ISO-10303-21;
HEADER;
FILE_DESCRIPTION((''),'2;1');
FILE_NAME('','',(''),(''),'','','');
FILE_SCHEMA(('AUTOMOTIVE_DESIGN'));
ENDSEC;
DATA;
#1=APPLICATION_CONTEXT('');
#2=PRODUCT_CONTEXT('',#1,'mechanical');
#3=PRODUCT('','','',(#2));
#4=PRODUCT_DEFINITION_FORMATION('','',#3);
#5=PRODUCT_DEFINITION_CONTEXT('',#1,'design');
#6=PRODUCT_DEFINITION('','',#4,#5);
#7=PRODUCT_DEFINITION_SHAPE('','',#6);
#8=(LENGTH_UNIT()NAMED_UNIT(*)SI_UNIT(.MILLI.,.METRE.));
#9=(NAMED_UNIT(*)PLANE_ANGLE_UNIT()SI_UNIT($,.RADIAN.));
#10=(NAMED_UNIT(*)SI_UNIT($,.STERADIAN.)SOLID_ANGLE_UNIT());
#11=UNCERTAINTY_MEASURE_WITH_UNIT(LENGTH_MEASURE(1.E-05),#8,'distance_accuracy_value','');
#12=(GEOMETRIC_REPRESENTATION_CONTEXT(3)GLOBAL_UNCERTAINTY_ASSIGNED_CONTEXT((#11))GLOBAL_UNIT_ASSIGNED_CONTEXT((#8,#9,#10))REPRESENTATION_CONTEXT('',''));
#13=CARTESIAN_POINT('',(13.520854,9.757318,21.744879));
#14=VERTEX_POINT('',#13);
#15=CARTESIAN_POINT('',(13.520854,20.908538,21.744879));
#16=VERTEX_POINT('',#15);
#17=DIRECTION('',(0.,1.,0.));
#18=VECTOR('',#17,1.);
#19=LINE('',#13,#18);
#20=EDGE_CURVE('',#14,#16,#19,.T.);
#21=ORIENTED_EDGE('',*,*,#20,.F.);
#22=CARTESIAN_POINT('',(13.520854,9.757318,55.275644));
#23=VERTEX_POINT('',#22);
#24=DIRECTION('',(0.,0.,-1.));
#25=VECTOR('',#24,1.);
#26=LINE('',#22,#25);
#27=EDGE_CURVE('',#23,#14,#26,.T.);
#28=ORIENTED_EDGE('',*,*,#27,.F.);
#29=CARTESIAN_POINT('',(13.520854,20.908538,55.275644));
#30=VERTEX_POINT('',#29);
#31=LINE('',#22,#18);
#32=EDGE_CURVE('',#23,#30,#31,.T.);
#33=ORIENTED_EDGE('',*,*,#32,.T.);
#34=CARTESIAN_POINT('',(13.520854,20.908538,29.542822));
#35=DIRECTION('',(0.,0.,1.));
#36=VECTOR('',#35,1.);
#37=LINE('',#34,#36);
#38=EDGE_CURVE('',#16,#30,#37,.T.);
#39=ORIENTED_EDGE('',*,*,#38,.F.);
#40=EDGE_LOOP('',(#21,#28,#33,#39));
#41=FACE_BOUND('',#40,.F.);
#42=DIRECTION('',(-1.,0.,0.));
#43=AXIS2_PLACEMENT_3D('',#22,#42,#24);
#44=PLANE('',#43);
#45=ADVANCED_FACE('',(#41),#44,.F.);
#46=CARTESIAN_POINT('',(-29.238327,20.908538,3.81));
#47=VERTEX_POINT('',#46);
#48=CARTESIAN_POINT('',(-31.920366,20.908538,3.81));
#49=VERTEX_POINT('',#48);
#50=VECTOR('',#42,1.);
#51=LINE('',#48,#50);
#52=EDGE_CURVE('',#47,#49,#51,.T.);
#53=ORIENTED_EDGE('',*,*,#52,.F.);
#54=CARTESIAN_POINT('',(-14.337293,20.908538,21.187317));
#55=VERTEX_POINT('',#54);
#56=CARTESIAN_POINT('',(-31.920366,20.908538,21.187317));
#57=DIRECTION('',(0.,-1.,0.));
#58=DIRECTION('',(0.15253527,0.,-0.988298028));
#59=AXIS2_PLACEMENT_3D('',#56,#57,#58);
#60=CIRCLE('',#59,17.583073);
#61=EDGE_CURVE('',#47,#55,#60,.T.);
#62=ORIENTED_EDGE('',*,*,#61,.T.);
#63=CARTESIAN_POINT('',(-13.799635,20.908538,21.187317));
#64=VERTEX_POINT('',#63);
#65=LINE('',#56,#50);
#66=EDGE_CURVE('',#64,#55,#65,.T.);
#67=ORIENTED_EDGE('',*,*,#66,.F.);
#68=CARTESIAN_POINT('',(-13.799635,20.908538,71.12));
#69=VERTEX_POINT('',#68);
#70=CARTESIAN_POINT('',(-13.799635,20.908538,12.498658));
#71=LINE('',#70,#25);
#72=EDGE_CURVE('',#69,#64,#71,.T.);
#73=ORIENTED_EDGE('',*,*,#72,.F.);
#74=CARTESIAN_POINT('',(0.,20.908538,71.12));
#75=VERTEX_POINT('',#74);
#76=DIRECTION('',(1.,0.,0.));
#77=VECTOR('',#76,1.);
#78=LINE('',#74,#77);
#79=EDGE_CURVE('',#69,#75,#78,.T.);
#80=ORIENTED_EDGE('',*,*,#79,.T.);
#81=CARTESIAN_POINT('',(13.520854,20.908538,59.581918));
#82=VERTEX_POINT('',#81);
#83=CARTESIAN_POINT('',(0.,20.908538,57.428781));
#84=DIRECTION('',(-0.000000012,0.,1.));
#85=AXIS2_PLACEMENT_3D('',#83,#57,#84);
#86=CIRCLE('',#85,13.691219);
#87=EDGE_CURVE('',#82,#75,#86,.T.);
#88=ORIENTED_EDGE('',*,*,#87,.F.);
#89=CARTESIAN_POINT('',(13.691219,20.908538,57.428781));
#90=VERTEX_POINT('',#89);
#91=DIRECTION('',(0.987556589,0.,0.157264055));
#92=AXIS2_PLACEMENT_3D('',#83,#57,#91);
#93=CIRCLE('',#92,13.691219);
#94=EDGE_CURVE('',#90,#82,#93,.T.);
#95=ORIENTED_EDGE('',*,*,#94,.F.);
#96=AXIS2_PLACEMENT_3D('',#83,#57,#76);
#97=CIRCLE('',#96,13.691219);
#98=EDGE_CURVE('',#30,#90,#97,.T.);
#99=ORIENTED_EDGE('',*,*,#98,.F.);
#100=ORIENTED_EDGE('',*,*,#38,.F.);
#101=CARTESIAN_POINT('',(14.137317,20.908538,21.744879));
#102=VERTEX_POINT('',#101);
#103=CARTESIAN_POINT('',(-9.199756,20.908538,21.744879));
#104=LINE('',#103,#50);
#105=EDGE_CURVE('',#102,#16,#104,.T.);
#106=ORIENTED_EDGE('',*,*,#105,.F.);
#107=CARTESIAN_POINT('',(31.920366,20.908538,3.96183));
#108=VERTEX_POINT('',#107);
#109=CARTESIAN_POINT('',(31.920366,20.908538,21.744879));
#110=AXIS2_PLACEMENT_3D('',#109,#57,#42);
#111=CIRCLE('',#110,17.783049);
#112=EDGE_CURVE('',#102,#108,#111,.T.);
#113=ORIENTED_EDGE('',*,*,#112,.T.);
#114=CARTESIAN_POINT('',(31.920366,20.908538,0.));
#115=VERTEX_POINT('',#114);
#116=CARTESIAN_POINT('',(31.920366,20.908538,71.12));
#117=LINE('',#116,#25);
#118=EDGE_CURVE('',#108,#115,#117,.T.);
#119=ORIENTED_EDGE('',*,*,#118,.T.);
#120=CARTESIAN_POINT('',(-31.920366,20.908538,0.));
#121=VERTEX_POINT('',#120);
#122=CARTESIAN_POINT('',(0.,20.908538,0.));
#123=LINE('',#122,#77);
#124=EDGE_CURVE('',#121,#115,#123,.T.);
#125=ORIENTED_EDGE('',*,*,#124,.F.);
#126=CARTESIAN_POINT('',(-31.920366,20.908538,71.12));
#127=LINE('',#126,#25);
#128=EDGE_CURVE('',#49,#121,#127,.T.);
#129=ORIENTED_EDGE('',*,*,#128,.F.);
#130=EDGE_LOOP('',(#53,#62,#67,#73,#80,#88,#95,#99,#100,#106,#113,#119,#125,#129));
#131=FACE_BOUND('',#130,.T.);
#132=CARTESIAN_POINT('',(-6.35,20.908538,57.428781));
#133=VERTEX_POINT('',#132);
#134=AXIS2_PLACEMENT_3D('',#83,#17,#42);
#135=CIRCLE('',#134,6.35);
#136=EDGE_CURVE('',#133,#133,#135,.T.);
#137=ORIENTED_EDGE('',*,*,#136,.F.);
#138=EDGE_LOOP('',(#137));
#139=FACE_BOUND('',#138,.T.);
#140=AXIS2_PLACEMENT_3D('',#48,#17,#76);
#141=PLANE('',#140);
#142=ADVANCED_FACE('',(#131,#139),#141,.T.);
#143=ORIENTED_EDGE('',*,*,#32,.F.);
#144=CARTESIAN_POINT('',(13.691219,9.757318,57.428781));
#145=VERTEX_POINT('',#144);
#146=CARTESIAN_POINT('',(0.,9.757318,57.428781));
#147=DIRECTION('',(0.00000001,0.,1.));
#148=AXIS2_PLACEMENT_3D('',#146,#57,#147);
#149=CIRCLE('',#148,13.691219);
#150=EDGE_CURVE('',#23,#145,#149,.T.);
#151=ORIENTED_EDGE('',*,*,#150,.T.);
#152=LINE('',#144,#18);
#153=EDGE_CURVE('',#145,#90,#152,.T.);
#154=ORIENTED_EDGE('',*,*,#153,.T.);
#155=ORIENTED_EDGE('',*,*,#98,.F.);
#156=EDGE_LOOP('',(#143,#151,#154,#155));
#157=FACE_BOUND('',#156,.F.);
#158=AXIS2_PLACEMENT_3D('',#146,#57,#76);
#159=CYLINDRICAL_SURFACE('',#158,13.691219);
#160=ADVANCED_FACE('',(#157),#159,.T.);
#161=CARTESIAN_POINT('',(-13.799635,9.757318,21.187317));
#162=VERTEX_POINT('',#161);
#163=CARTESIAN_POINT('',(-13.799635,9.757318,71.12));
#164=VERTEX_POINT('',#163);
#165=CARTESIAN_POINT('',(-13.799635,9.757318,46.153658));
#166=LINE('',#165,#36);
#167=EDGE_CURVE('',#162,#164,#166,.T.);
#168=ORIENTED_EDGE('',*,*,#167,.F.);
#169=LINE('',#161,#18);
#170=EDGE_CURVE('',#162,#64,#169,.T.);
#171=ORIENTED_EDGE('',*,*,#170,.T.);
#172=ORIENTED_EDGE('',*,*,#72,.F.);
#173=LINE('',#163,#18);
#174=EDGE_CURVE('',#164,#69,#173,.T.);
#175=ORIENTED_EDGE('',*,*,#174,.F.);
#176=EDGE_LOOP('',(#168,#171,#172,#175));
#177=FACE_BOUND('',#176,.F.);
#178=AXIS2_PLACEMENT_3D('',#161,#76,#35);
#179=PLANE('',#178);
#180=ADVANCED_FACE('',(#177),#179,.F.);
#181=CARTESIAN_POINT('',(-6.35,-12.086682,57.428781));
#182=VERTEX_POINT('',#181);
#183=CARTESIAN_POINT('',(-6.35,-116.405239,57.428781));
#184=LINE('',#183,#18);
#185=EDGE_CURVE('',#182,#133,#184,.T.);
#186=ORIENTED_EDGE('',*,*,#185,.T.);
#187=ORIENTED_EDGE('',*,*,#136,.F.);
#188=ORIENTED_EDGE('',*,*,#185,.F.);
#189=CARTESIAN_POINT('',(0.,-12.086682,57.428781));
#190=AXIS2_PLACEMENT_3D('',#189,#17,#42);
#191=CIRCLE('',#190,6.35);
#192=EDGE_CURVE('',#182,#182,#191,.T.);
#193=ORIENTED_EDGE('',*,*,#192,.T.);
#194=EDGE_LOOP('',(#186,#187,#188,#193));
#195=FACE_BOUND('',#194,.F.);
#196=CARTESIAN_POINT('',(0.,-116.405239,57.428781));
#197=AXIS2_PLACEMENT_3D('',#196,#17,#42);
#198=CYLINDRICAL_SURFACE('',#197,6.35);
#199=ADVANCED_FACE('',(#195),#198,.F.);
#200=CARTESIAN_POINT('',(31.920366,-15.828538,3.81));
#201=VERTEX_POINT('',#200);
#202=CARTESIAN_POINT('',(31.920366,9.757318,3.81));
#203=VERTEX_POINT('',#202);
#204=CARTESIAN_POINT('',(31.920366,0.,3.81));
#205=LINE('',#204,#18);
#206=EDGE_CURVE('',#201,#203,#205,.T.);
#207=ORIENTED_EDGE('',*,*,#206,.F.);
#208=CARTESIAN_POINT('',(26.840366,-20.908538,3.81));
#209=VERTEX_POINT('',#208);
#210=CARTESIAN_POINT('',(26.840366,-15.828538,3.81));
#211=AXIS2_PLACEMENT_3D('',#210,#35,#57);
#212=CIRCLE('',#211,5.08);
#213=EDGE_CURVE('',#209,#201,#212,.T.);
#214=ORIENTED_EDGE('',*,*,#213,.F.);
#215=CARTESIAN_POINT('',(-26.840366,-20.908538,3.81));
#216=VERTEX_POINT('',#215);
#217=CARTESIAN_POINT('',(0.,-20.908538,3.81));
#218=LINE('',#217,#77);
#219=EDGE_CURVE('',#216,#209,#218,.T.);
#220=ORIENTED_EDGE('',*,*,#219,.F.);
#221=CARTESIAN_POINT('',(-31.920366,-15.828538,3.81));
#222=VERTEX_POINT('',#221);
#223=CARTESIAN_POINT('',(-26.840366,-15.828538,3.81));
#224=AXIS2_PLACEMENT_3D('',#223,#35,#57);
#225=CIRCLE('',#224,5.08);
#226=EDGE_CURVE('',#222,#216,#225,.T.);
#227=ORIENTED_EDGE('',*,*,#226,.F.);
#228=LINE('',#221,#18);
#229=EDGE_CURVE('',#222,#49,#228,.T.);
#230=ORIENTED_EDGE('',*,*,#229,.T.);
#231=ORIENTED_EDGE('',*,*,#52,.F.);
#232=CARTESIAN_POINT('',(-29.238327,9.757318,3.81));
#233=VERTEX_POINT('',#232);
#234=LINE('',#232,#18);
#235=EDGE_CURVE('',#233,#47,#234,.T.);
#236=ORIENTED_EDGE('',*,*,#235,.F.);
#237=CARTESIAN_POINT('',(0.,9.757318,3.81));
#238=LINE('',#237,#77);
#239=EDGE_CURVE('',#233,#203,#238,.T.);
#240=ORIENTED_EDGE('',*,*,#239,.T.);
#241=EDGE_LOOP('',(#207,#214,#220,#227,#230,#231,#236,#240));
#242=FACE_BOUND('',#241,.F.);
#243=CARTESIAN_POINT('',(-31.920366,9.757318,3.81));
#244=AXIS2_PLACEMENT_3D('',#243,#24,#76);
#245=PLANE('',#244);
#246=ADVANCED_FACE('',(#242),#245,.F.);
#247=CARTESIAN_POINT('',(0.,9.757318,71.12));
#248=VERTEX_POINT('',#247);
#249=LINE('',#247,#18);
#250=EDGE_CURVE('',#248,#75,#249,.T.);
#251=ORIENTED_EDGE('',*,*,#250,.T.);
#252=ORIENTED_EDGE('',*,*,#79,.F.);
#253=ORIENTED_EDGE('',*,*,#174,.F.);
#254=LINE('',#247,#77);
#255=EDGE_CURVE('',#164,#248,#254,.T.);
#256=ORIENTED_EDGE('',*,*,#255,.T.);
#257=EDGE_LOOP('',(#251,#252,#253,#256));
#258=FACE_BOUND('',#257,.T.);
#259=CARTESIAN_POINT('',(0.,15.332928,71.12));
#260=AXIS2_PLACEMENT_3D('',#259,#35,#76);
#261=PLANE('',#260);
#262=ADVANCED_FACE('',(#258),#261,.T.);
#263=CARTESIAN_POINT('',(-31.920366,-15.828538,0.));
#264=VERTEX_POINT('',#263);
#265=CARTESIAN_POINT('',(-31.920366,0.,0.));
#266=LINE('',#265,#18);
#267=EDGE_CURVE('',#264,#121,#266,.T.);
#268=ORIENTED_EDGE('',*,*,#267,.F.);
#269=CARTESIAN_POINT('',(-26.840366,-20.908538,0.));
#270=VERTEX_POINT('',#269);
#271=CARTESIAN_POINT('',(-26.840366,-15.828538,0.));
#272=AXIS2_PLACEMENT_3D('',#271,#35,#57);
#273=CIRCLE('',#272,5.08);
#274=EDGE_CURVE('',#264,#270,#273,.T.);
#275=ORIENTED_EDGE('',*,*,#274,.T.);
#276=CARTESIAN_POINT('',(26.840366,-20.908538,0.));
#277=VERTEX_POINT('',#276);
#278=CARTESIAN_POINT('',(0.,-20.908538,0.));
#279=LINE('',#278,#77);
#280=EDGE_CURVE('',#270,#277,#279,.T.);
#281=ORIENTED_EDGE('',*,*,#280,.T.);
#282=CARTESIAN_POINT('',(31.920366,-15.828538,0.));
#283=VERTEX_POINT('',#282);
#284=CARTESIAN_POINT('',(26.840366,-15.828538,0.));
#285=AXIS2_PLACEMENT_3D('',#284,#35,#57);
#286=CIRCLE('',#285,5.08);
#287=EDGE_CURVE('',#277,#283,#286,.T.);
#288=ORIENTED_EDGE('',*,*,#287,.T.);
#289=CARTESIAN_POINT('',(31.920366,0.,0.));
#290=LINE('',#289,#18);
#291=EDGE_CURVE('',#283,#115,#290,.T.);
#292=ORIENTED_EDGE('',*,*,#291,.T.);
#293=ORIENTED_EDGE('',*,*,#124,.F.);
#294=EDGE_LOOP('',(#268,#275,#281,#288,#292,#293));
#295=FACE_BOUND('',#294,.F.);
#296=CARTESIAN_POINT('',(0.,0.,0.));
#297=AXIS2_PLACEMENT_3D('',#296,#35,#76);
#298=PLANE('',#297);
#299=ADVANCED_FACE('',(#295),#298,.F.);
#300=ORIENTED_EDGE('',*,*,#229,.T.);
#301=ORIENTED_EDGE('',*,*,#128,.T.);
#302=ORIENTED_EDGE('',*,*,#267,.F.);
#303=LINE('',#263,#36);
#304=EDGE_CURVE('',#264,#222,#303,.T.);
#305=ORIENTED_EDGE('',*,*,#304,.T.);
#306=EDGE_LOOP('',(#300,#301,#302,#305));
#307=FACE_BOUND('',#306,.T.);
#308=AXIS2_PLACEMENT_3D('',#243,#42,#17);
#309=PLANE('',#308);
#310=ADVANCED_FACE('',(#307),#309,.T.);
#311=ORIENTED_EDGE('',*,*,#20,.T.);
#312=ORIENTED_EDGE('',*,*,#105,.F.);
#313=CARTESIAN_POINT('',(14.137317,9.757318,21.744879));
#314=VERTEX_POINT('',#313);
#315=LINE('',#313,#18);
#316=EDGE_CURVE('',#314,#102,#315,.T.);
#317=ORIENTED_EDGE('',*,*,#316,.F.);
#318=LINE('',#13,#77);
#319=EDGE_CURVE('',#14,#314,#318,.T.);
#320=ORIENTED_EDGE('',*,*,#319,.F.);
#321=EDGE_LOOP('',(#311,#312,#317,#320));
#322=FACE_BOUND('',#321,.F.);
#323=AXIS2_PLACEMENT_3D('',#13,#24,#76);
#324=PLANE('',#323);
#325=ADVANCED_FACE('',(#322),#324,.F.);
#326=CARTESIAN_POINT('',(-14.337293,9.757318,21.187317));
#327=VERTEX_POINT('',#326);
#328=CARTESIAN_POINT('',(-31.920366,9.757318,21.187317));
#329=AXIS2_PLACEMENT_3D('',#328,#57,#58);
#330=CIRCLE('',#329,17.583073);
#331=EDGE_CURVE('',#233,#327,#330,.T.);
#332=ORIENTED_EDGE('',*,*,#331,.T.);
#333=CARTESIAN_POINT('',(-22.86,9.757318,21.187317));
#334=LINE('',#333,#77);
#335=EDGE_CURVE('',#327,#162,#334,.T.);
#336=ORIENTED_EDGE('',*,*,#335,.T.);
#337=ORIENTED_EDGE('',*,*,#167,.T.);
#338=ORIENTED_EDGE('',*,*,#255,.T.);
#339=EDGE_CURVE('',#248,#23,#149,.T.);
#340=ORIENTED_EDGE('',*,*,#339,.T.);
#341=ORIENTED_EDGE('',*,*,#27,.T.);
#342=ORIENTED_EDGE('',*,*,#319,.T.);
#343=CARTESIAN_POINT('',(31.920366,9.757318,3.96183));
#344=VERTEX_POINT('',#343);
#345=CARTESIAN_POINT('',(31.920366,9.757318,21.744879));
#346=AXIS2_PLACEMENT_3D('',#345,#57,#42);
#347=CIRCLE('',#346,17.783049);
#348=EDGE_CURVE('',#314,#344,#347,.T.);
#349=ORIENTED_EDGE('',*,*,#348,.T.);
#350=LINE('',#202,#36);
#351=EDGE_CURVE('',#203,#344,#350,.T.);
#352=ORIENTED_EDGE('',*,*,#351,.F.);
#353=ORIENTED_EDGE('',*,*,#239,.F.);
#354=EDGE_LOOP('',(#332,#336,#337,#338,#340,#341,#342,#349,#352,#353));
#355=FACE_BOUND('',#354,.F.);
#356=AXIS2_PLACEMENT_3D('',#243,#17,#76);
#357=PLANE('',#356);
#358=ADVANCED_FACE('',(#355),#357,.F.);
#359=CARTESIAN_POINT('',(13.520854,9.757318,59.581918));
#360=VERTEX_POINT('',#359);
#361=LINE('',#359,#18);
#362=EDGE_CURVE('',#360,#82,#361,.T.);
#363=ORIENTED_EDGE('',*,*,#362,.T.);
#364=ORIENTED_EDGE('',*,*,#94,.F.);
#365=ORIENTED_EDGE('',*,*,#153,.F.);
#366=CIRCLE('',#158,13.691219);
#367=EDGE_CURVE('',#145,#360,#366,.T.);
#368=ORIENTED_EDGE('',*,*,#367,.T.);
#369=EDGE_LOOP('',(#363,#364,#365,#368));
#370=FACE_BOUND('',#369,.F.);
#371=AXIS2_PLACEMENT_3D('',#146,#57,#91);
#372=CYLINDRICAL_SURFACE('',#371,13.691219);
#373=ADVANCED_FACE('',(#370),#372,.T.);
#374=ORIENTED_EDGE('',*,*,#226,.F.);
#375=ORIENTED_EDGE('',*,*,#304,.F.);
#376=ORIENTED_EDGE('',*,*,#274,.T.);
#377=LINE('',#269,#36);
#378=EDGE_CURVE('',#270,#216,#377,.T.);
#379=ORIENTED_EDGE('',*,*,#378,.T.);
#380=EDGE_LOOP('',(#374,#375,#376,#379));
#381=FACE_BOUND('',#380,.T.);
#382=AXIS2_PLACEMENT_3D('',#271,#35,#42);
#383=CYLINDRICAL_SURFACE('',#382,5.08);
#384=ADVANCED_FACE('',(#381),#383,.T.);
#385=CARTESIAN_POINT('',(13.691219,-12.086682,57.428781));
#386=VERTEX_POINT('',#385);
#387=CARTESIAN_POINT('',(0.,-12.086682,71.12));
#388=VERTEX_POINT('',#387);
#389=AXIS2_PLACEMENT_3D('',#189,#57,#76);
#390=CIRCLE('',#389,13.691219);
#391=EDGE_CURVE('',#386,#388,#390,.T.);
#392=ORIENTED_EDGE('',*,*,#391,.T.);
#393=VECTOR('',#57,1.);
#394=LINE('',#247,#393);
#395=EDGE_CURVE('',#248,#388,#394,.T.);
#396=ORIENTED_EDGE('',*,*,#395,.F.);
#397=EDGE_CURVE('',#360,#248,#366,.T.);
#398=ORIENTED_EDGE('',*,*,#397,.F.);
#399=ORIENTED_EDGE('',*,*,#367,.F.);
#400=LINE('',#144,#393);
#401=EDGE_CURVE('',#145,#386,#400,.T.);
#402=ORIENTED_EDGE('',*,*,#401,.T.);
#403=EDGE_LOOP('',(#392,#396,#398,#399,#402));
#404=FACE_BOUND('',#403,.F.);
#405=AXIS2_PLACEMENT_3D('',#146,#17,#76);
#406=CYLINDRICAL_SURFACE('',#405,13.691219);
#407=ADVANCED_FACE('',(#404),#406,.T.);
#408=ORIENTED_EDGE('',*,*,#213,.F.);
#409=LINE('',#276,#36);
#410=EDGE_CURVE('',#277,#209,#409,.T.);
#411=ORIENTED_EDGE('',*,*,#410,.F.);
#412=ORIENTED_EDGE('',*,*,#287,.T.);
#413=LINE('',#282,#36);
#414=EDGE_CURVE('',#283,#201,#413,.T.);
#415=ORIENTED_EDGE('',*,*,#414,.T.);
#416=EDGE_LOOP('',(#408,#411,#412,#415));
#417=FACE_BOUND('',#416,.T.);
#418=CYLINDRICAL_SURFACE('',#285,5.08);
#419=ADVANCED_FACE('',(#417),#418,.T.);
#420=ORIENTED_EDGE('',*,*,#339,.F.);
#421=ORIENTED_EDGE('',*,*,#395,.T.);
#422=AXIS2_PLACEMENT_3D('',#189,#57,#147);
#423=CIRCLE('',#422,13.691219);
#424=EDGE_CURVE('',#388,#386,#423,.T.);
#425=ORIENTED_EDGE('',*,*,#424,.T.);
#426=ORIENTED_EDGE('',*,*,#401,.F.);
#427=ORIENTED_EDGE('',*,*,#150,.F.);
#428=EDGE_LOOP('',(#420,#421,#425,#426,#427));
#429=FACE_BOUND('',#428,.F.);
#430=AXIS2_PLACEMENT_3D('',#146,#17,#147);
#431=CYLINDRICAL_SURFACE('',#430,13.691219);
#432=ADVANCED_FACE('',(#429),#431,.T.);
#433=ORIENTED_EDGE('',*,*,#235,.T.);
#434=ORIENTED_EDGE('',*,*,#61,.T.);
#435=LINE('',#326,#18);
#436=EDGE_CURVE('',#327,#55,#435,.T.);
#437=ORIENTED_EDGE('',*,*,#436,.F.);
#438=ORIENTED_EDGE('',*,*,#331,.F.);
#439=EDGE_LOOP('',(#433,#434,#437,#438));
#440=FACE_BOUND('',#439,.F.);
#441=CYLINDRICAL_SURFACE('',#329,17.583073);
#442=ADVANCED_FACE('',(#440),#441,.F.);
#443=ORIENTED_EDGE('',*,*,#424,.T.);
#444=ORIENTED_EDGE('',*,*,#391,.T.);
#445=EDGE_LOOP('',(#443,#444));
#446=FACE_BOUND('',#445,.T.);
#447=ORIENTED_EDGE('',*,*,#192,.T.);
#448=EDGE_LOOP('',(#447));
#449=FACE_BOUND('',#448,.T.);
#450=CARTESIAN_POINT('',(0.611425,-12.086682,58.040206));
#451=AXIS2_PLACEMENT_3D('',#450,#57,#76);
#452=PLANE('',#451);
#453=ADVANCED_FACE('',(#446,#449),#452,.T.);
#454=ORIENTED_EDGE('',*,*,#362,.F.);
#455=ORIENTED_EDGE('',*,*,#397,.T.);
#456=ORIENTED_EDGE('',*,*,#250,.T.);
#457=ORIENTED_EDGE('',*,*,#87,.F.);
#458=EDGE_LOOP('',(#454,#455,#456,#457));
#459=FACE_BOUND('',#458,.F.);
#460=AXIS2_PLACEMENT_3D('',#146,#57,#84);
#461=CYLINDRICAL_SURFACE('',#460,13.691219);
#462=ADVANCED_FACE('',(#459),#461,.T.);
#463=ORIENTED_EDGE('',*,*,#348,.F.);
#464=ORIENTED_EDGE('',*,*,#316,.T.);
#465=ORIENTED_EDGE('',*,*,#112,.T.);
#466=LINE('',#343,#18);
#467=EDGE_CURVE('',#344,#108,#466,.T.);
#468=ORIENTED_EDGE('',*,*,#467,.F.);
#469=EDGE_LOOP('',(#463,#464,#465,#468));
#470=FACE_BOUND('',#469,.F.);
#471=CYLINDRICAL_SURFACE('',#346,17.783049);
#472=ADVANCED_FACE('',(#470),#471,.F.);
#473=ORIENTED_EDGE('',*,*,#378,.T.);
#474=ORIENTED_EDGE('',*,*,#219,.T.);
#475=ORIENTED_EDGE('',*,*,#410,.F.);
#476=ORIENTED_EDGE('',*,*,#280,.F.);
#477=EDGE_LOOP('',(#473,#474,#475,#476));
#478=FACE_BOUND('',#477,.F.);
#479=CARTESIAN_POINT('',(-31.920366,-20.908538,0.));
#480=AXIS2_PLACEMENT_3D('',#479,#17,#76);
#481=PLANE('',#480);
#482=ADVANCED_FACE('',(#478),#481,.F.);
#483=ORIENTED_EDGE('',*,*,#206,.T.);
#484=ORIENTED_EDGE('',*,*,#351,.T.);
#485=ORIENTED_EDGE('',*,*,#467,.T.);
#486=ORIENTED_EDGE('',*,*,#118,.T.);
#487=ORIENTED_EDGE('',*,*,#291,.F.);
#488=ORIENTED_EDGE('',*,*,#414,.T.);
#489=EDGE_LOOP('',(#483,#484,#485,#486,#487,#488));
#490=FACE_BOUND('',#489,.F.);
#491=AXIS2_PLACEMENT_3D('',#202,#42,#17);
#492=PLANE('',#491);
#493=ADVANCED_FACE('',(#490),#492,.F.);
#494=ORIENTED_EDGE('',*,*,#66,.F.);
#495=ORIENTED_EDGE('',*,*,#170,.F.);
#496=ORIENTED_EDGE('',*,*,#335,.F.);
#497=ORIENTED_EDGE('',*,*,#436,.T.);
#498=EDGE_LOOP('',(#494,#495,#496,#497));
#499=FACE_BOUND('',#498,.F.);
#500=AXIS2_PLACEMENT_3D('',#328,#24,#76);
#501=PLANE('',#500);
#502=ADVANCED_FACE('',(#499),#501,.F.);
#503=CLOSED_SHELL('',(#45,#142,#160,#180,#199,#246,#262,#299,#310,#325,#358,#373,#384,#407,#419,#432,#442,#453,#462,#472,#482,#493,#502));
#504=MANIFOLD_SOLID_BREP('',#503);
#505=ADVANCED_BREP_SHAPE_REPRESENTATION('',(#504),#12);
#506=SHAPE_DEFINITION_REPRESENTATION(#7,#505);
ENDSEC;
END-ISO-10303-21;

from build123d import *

# Parameters (mm, degrees)
F0_W      = 63.8407319784
F0_H      = 41.8170765042
F1_DEPTH  = 3.81
F2_R      = 5.08
F3_W      = 63.8407319784
F3_H      = 11.1512206495
F4_DEPTH  = 67.31
F6_DEPTH  = 21.844
F8_D      = 12.7
F9_W      = 18.1207312271
F9_H      = 49.9326833737
F10_DEPTH = 25.4
F12_DEPTH = 25.4


# Not quite as in the source:
# - a feature of the source that left no trace in its solid (it failed there, or was rolled back) is left out


with BuildPart() as f1:
    # F0 (on Top) → F1 (new body)
    with BuildSketch(Plane.XY):
        Rectangle(F0_W, F0_H)
    extrude(amount=F1_DEPTH)

    # F2
    f2_edges = [f1.edges().sort_by_distance(p)[0] for p in [
        (-31.920366, -20.908538, 1.905),
        (31.920366, -20.908538, 1.905),
    ]]
    fillet(f2_edges, radius=F2_R)

    # F3 (on face) → F4 (join)
    with BuildSketch(Plane.XY.offset(3.81)):
        with Locations((0, 15.3329279274)):
            Rectangle(F3_W, F3_H)
    extrude(amount=F4_DEPTH)

    # F5 (on face) → F6 (join)
    with BuildSketch(Plane.XZ.offset(-9.7573176026)):
        with BuildLine():
            ThreePointArc((1.435e-07, 71.12), (-9.6811538885, 47.7476271561), (13.6912190568, 57.4287809432))
            ThreePointArc((13.6912190568, 57.4287809432), (9.6811538885, 67.1099347302), (1.435e-07, 71.12))
        make_face()
    extrude(amount=F6_DEPTH)

    # F8 (through all)
    with Locations(Plane.XZ.offset(12.0866823974)):
        with Locations((0, 57.4287809432)):
            Hole(F8_D / 2)

    # F9 (on face) → F10 (cut)
    with BuildSketch(Plane.XZ.offset(-9.7573176026)):
        with Locations((-22.8600003757, 46.1536583132)):
            Rectangle(F9_W, F9_H)
        with BuildLine():
            Line((13.5208535939, 71.12), (-1.606e-07, 71.12))
            ThreePointArc((-1.606e-07, 71.12), (8.8873621455, 67.8433991962), (13.5208535939, 59.5819175746))
            Line((13.5208535939, 59.5819175746), (13.5208535939, 71.12))
        make_face()
        with BuildLine():
            Line((31.9203659892, 71.12), (13.5208535939, 71.12))
            Line((13.5208535939, 71.12), (13.5208535939, 59.5819175746))
            ThreePointArc((13.5208535939, 59.5819175746), (13.6485612365, 58.5087140134), (13.6912190568, 57.4287809432))
            ThreePointArc((13.6912190568, 57.4287809432), (13.6485612365, 56.3488478729), (13.5208535939, 55.2756443117))
            Line((13.5208535939, 55.2756443117), (13.5208535939, 21.7448789626))
            Line((13.5208535939, 21.7448789626), (31.9203659892, 21.7448789626))
            Line((31.9203659892, 21.7448789626), (31.9203659892, 71.12))
        make_face()
    extrude(amount=-F10_DEPTH, mode=Mode.SUBTRACT)

    # F11 (on face) → F12 (cut)
    with BuildSketch(Plane.XZ.offset(-9.7573176026)):
        with BuildLine():
            ThreePointArc((-29.2383271601, 3.81), (-18.5726517534, 9.7416628621), (-14.3372927251, 21.1873166263))
            Line((-14.3372927251, 21.1873166263), (-31.9203659892, 21.1873166263))
            Line((-31.9203659892, 21.1873166263), (-31.9203659892, 3.81))
            Line((-31.9203659892, 3.81), (-29.2383271601, 3.81))
        make_face()
        with BuildLine():
            ThreePointArc((14.1373165346, 21.7448789626), (19.3458511297, 9.1703641031), (31.9203659892, 3.9618295081))
            Line((31.9203659892, 3.9618295081), (31.9203659892, 21.7448789626))
            Line((31.9203659892, 21.7448789626), (14.1373165346, 21.7448789626))
        make_face()
    extrude(amount=-F12_DEPTH, mode=Mode.SUBTRACT)


solid = f1.part
